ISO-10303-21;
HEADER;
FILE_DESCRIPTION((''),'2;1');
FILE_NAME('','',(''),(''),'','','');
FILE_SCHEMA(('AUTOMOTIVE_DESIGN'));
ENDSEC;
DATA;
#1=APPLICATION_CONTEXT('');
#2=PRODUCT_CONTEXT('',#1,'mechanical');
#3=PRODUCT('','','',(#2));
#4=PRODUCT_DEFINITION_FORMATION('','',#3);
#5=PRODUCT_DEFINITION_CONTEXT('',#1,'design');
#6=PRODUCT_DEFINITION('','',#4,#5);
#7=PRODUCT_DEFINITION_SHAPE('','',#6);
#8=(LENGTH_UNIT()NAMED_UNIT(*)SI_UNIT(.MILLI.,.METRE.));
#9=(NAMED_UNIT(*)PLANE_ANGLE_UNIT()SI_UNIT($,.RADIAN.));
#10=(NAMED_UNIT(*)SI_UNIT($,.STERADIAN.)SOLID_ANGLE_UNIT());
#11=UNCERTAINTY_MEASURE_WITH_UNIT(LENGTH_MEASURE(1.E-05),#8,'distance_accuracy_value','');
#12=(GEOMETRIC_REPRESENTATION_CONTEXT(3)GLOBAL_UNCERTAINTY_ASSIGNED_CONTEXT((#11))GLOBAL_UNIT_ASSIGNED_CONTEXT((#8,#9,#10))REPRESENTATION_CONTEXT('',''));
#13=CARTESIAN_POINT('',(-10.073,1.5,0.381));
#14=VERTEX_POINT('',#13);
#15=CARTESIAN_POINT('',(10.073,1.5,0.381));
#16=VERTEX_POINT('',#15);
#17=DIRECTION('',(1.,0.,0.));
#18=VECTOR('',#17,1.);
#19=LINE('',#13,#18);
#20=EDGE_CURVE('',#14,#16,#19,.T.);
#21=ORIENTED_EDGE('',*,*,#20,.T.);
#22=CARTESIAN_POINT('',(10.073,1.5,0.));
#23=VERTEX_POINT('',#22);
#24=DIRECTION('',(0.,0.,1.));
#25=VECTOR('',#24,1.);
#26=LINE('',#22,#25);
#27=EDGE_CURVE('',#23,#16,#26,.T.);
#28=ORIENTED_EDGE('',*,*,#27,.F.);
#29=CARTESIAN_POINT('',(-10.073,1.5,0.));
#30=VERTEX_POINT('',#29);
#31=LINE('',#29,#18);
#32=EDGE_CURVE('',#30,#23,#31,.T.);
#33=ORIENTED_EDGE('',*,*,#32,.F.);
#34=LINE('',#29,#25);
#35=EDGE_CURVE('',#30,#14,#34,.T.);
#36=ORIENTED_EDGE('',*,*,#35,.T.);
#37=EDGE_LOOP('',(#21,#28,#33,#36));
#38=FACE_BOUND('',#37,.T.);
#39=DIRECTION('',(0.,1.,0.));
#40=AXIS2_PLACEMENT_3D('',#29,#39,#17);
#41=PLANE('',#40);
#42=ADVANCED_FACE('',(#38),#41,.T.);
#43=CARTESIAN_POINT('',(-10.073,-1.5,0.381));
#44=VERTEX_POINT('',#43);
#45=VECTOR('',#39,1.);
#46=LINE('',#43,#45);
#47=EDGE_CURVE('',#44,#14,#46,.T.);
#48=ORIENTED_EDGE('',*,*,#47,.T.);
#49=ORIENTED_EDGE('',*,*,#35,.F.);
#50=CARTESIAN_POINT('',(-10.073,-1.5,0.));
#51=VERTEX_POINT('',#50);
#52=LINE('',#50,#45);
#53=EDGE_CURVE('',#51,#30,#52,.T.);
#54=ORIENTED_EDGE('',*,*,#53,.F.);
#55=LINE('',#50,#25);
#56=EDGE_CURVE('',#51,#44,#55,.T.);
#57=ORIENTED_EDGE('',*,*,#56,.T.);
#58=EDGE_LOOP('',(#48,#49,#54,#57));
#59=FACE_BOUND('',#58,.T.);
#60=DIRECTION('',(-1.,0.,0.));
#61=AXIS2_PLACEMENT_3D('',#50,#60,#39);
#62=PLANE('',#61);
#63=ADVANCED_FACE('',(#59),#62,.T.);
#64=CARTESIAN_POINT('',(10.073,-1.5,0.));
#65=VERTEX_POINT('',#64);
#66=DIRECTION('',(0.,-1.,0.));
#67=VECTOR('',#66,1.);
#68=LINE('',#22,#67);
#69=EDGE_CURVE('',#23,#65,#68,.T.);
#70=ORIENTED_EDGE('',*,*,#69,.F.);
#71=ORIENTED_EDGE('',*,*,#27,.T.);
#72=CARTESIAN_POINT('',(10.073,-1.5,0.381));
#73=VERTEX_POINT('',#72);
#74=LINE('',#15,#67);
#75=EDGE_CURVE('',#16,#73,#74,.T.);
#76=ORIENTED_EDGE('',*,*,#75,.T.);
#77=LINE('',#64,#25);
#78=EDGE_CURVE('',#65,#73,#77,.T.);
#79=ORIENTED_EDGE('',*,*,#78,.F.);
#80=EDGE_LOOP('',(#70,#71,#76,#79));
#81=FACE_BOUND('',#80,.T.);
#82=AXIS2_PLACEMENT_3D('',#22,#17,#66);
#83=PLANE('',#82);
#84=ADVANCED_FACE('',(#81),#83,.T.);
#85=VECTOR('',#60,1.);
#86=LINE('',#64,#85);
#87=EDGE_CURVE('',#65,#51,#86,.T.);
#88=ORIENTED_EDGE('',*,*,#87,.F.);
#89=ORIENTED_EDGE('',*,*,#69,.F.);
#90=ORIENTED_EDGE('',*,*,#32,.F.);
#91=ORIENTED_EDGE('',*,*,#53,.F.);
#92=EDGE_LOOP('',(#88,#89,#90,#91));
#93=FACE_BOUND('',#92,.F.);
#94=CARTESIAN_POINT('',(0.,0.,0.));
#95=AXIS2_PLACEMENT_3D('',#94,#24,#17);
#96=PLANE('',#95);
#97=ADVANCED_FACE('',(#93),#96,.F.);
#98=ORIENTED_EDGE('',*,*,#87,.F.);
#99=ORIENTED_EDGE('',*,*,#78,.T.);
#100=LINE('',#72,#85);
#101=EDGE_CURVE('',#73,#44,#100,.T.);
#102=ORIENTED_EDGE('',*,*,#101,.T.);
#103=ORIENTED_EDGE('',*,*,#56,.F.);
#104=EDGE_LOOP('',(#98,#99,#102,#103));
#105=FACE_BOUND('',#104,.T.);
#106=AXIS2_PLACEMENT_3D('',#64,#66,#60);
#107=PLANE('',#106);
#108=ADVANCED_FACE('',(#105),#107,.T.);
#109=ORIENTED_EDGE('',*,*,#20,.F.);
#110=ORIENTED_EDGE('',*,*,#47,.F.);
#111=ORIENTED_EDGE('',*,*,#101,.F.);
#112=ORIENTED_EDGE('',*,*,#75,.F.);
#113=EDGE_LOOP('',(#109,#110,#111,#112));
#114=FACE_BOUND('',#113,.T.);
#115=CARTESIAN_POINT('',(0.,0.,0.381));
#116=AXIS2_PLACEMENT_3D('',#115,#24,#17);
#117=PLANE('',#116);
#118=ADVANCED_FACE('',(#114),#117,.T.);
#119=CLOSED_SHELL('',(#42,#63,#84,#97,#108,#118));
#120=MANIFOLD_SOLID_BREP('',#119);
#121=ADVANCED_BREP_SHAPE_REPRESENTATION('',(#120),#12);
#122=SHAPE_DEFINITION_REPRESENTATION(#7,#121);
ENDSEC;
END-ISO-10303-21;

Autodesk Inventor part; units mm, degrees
ref_plane "YZ Plane" through (0, 0, 0) normal (1, 0, 0) x (0, 1, 0)
ref_plane "XZ Plane" through (0, 0, 0) normal (0, 1, 0) x (-1, 0, 0)
ref_plane "XY Plane" through (0, 0, 0) normal (0, 0, 1) x (1, 0, 0)
sketch "Sketch1" plane through (0, 0, 0) normal (0, 0, 1) x (1, 0, 0)
  line L0 (-10.073, 1.5) -> (10.073, 1.5)
  line L1 (10.073, 1.5) -> (10.073, -1.5)
  line L2 (10.073, -1.5) -> (-10.073, -1.5)
  line L3 (-10.073, -1.5) -> (-10.073, 1.5)
  line L4 (0, 0) -> (0, 1.1953)
  line L5 (0, 0) -> (1.5725, 0)
  dimension "d0" = 20.146
  dimension "d1" = 3
extrude "Plate1" add sketch "Sketch1" along normal blind 0.381
sketch "Sketch2" plane through (0, 0, 0.381) normal (0, 0, 1) x (1, 0, 0)
  line L0 (-10.073, 1.5) -> (10.073, 1.5) projected
  line L1 (10.073, -1.5) -> (-10.073, -1.5) projected
  line L2 (-1.059, 1.5) -> (-1.059, -1.5)
  line L3 (10.073, 1.5) -> (10.073, -1.5) projected
  point P0 (0, 0)
  dimension "d10" = 11.132
feature "Fold1" [suppressed]
sketch "Sketch4" plane through (0, 0, 0.381) normal (0, 0, 1) x (1, 0, 0)
  line L0 (-10.073, 1.5) -> (10.073, 1.5) projected
  line L1 (-10.073, -1.5) -> (-10.073, 1.5) projected
  line L2 (10.073, -1.5) -> (-10.073, -1.5) projected
  line L3 (-5.941, 1.5) -> (-5.941, -1.5)
  point P0 (-1.1914, -1.5)
  point P1 (-1.1914, 1.5)
  point P2 (0, 0)
  dimension "d11" = 4.132
feature "Fold2" [suppressed]
equation "\"d4\" = BendReliefWidth"
equation "\"d5\" = BendReliefDepth"
equation "\"d6\" = MinimumRemnant"
equation "\"d7\" = BendRadius"
equation "\"d9\" = BendRadius"
equation "\"d12\" = BendReliefWidth"
equation "\"d13\" = BendReliefDepth"
equation "\"d14\" = MinimumRemnant"
equation "\"d15\" = BendRadius"
equation "\"d17\" = BendRadius"
equation "\"BendReliefWidth\" = Thickness"
equation "\"BendReliefDepth\" = 0.5 * Thickness"
equation "\"CornerReliefSize\" = 4 * Thickness"
equation "\"MinimumRemnant\" = 2 * Thickness"
equation "\"TransitionRadius\" = BendRadius"
equation "\"JacobiRadiusSize\" = BendRadius"
equation "\"GapSize\" = Thickness"
equation "\"d2\" = BendRadius"
equation "\"BendRadius\" = 0.001"
equation "\"Thickness\" = 0.381"
properties part number "Crystal_L_Strip_no-folds"
